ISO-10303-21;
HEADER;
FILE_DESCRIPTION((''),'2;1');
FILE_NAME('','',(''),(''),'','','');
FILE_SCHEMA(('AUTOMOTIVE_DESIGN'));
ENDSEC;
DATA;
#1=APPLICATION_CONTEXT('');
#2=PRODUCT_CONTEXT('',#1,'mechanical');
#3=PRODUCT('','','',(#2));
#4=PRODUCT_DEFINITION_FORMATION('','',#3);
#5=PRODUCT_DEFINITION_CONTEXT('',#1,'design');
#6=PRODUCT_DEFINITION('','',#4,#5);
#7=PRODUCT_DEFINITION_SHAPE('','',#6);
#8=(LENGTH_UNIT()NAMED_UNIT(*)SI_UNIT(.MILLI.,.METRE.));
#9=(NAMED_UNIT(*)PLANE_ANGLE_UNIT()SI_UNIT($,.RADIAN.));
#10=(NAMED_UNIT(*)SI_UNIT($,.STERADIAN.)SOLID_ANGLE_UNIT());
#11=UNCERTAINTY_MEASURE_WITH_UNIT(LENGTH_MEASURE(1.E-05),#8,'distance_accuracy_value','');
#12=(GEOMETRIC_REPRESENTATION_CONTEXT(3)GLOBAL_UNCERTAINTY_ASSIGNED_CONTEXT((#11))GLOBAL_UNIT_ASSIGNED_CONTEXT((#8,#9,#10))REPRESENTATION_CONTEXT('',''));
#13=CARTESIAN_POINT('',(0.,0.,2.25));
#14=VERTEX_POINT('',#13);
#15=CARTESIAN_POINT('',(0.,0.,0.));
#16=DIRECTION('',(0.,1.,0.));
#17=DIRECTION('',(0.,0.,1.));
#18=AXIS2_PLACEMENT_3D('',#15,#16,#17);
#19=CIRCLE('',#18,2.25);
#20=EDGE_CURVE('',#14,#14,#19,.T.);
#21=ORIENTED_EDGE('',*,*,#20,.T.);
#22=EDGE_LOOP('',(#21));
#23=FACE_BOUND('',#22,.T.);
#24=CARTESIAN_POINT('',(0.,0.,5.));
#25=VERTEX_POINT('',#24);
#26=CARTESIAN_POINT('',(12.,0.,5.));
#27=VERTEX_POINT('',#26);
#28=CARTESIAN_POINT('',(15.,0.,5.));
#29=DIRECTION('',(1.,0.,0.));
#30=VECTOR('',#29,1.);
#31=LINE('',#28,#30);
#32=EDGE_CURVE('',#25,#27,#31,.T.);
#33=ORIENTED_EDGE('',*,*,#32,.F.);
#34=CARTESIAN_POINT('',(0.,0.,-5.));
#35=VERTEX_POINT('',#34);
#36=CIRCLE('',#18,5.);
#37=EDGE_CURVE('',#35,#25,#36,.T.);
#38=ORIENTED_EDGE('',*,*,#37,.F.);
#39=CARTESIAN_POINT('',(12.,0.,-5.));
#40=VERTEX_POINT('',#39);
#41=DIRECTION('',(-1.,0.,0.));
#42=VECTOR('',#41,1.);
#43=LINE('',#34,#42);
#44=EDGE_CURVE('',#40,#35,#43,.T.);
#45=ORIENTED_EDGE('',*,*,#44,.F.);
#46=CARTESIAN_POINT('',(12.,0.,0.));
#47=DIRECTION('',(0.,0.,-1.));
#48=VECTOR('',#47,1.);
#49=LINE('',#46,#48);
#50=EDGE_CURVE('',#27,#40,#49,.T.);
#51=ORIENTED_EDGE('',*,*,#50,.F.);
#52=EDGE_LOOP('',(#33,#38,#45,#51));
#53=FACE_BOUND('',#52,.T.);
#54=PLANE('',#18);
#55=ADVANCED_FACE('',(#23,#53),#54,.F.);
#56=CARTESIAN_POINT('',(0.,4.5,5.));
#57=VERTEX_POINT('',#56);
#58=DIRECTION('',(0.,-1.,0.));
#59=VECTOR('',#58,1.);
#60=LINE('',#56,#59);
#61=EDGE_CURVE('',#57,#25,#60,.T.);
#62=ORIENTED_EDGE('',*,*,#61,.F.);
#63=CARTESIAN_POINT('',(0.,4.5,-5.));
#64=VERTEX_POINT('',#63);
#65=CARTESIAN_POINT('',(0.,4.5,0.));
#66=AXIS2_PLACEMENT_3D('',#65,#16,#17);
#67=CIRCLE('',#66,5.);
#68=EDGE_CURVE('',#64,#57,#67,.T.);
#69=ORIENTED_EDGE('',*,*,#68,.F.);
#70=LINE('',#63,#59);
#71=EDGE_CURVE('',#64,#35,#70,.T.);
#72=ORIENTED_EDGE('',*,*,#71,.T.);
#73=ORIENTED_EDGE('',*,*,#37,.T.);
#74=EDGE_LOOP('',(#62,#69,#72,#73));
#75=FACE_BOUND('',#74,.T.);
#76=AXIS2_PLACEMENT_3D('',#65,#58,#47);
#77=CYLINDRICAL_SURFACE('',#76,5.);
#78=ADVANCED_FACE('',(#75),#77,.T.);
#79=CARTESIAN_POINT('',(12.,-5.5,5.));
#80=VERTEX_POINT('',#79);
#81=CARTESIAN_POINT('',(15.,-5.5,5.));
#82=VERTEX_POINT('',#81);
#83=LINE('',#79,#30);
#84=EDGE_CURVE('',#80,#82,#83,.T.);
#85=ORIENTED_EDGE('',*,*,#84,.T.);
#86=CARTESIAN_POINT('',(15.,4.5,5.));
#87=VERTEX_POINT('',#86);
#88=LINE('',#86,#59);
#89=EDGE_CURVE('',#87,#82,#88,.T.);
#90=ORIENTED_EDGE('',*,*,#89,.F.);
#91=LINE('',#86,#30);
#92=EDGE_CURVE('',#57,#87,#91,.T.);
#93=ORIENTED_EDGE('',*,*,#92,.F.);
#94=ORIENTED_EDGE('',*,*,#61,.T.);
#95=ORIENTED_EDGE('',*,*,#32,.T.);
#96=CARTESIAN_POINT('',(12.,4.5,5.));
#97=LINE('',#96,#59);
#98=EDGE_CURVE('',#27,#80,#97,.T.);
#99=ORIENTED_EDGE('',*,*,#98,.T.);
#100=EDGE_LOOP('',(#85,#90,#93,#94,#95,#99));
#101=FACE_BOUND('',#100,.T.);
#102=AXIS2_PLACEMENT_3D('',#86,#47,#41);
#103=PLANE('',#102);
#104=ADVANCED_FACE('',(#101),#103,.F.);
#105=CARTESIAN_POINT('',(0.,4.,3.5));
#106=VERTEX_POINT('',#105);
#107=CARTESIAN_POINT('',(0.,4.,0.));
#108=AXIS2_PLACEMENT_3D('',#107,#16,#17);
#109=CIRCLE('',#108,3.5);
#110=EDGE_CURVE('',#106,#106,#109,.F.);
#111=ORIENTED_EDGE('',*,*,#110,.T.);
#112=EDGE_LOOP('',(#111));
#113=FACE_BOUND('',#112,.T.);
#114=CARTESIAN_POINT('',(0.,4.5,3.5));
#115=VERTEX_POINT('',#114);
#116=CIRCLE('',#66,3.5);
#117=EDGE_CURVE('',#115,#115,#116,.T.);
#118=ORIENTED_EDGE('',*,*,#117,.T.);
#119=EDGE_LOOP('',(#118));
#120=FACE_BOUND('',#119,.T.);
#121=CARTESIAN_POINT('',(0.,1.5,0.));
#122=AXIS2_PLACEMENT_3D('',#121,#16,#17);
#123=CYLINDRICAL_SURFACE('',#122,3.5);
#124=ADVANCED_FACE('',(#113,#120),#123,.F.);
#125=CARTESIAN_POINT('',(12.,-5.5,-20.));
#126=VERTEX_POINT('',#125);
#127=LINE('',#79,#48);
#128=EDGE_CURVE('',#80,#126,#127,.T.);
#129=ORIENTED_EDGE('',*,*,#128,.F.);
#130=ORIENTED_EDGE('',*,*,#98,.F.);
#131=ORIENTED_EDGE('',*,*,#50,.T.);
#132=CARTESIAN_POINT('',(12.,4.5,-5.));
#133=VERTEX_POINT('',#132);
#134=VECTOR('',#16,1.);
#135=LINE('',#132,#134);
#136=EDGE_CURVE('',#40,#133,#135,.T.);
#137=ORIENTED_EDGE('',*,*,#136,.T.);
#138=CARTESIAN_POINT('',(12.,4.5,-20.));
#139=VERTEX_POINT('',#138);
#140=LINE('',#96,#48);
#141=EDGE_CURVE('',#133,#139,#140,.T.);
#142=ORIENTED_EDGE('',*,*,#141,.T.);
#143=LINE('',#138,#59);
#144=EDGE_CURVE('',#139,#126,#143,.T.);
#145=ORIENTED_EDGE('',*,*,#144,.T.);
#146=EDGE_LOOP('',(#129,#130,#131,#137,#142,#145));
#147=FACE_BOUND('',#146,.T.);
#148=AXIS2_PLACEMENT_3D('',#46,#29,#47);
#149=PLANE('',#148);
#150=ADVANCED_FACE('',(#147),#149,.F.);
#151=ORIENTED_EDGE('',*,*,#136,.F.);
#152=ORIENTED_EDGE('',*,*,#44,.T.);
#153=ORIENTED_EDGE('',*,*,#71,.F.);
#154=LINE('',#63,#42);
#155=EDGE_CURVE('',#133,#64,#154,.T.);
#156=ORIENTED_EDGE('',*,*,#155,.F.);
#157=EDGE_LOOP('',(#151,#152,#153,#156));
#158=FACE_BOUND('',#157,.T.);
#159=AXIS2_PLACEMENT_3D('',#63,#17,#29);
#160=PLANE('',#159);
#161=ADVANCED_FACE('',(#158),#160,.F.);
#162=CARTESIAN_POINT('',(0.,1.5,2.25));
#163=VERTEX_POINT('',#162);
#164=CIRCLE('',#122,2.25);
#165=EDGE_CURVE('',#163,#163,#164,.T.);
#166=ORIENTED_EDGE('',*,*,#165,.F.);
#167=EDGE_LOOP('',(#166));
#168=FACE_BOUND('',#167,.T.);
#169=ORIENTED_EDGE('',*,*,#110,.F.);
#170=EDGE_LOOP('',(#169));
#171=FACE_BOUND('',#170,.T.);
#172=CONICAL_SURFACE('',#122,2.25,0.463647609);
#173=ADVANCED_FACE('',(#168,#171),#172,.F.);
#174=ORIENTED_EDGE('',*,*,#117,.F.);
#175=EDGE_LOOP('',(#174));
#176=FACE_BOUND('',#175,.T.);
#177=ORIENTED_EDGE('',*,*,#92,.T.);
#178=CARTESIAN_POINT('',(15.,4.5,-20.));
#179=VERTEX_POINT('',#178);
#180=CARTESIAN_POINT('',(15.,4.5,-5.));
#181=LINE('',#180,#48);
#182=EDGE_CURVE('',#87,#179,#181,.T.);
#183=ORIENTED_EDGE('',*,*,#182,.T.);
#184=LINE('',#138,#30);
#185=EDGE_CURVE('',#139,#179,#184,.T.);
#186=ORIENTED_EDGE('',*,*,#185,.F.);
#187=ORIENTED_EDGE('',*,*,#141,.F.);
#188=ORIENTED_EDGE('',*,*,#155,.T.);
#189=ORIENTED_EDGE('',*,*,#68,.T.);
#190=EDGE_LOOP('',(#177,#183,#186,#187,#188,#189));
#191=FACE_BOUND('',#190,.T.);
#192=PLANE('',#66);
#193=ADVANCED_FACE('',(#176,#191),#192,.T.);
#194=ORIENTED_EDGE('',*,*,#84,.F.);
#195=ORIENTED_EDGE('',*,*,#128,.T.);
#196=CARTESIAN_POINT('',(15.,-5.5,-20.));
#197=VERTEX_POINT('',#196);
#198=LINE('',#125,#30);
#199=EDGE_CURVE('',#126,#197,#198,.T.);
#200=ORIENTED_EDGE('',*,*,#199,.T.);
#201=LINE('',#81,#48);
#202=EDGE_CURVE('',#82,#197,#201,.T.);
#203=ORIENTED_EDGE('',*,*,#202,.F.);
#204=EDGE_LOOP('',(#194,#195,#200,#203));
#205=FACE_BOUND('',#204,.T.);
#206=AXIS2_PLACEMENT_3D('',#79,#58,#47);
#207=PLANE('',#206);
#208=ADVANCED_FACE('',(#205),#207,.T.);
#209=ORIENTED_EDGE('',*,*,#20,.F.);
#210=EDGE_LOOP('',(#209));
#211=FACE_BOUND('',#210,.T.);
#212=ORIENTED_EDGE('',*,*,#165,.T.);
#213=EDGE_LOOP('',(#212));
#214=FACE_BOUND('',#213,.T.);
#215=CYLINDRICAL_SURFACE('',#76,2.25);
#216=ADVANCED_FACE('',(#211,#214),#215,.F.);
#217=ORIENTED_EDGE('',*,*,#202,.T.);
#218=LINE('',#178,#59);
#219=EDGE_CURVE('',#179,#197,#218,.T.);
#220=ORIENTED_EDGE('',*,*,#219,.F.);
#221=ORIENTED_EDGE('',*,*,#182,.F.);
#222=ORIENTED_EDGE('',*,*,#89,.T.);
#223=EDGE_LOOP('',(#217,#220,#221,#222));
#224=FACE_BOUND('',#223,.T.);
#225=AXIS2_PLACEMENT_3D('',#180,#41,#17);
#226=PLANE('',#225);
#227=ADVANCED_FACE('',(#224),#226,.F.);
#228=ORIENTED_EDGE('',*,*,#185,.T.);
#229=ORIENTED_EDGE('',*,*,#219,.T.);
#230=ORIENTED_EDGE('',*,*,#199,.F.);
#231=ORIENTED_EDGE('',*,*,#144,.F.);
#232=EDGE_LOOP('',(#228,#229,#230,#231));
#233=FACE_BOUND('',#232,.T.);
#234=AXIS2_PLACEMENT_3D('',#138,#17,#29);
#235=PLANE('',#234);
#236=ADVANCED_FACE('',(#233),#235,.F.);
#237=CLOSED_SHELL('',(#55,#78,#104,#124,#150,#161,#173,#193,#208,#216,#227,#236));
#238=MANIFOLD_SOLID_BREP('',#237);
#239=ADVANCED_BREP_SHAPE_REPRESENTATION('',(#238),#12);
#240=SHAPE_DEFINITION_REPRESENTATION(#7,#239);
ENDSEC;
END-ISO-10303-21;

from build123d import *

# Parameters (mm, degrees)
SKETCH1_R           = 2.25
BOSS_EXTRUDE1_DEPTH = 4.5
SKETCH2_W           = 25
SKETCH2_H           = 10
BOSS_EXTRUDE2_DEPTH = 3
SKETCH3_R           = 3.5
CUT_EXTRUDE1_DEPTH  = 3
CHAMFER1_SIZE2      = 1.25
CHAMFER1_SIZE       = 2.5


with BuildPart() as part:
    # Sketch1 → Boss-Extrude1 (new body)
    with BuildSketch(Plane(origin=(0, 0, 0), x_dir=(1, 0, 0), z_dir=(0, 1, 0))):
        with BuildLine():
            Line((0, 5), (15, 5))
            Line((15, 5), (15, -5))
            Line((15, -5), (0, -5))
            ThreePointArc((0, -5), (-5, 0), (0, 5))
        make_face()
        with Locations(Location((0, 0, 0), (0, 0, 270))):
            Circle(SKETCH1_R, mode=Mode.SUBTRACT)
    extrude(amount=BOSS_EXTRUDE1_DEPTH)

    # Sketch2 → Boss-Extrude2 (add)
    with BuildSketch(Plane(origin=(15, 0, 0), x_dir=(0, 0, -1), z_dir=(1, 0, 0))):
        with Locations((7.5, -0.5)):
            Rectangle(SKETCH2_W, SKETCH2_H)
    extrude(amount=-BOSS_EXTRUDE2_DEPTH)

    # Sketch3 → Cut-Extrude1 (cut)
    with BuildSketch(Plane(origin=(0, 4.5, 0), x_dir=(1, 0, 0), z_dir=(0, 1, 0))):
        with Locations(Location((0, 0, 0), (0, 0, 270))):
            Circle(SKETCH3_R)
    extrude(amount=-CUT_EXTRUDE1_DEPTH, mode=Mode.SUBTRACT)

    # Chamfer1
    chamfer1_edges = [part.edges().sort_by_distance(p)[0] for p in [
        (0, 1.5, -3.5),
    ]]
    chamfer1_side = [part.faces().sort_by_distance(p)[0] for p in [
        (0, 1.525, -3.5),
    ]]
    chamfer(chamfer1_edges, length=CHAMFER1_SIZE - 0.0001, length2=CHAMFER1_SIZE2 - 0.0001, reference=chamfer1_side[0])  # a hair under: the kernel refuses the full size


solid = part.part
